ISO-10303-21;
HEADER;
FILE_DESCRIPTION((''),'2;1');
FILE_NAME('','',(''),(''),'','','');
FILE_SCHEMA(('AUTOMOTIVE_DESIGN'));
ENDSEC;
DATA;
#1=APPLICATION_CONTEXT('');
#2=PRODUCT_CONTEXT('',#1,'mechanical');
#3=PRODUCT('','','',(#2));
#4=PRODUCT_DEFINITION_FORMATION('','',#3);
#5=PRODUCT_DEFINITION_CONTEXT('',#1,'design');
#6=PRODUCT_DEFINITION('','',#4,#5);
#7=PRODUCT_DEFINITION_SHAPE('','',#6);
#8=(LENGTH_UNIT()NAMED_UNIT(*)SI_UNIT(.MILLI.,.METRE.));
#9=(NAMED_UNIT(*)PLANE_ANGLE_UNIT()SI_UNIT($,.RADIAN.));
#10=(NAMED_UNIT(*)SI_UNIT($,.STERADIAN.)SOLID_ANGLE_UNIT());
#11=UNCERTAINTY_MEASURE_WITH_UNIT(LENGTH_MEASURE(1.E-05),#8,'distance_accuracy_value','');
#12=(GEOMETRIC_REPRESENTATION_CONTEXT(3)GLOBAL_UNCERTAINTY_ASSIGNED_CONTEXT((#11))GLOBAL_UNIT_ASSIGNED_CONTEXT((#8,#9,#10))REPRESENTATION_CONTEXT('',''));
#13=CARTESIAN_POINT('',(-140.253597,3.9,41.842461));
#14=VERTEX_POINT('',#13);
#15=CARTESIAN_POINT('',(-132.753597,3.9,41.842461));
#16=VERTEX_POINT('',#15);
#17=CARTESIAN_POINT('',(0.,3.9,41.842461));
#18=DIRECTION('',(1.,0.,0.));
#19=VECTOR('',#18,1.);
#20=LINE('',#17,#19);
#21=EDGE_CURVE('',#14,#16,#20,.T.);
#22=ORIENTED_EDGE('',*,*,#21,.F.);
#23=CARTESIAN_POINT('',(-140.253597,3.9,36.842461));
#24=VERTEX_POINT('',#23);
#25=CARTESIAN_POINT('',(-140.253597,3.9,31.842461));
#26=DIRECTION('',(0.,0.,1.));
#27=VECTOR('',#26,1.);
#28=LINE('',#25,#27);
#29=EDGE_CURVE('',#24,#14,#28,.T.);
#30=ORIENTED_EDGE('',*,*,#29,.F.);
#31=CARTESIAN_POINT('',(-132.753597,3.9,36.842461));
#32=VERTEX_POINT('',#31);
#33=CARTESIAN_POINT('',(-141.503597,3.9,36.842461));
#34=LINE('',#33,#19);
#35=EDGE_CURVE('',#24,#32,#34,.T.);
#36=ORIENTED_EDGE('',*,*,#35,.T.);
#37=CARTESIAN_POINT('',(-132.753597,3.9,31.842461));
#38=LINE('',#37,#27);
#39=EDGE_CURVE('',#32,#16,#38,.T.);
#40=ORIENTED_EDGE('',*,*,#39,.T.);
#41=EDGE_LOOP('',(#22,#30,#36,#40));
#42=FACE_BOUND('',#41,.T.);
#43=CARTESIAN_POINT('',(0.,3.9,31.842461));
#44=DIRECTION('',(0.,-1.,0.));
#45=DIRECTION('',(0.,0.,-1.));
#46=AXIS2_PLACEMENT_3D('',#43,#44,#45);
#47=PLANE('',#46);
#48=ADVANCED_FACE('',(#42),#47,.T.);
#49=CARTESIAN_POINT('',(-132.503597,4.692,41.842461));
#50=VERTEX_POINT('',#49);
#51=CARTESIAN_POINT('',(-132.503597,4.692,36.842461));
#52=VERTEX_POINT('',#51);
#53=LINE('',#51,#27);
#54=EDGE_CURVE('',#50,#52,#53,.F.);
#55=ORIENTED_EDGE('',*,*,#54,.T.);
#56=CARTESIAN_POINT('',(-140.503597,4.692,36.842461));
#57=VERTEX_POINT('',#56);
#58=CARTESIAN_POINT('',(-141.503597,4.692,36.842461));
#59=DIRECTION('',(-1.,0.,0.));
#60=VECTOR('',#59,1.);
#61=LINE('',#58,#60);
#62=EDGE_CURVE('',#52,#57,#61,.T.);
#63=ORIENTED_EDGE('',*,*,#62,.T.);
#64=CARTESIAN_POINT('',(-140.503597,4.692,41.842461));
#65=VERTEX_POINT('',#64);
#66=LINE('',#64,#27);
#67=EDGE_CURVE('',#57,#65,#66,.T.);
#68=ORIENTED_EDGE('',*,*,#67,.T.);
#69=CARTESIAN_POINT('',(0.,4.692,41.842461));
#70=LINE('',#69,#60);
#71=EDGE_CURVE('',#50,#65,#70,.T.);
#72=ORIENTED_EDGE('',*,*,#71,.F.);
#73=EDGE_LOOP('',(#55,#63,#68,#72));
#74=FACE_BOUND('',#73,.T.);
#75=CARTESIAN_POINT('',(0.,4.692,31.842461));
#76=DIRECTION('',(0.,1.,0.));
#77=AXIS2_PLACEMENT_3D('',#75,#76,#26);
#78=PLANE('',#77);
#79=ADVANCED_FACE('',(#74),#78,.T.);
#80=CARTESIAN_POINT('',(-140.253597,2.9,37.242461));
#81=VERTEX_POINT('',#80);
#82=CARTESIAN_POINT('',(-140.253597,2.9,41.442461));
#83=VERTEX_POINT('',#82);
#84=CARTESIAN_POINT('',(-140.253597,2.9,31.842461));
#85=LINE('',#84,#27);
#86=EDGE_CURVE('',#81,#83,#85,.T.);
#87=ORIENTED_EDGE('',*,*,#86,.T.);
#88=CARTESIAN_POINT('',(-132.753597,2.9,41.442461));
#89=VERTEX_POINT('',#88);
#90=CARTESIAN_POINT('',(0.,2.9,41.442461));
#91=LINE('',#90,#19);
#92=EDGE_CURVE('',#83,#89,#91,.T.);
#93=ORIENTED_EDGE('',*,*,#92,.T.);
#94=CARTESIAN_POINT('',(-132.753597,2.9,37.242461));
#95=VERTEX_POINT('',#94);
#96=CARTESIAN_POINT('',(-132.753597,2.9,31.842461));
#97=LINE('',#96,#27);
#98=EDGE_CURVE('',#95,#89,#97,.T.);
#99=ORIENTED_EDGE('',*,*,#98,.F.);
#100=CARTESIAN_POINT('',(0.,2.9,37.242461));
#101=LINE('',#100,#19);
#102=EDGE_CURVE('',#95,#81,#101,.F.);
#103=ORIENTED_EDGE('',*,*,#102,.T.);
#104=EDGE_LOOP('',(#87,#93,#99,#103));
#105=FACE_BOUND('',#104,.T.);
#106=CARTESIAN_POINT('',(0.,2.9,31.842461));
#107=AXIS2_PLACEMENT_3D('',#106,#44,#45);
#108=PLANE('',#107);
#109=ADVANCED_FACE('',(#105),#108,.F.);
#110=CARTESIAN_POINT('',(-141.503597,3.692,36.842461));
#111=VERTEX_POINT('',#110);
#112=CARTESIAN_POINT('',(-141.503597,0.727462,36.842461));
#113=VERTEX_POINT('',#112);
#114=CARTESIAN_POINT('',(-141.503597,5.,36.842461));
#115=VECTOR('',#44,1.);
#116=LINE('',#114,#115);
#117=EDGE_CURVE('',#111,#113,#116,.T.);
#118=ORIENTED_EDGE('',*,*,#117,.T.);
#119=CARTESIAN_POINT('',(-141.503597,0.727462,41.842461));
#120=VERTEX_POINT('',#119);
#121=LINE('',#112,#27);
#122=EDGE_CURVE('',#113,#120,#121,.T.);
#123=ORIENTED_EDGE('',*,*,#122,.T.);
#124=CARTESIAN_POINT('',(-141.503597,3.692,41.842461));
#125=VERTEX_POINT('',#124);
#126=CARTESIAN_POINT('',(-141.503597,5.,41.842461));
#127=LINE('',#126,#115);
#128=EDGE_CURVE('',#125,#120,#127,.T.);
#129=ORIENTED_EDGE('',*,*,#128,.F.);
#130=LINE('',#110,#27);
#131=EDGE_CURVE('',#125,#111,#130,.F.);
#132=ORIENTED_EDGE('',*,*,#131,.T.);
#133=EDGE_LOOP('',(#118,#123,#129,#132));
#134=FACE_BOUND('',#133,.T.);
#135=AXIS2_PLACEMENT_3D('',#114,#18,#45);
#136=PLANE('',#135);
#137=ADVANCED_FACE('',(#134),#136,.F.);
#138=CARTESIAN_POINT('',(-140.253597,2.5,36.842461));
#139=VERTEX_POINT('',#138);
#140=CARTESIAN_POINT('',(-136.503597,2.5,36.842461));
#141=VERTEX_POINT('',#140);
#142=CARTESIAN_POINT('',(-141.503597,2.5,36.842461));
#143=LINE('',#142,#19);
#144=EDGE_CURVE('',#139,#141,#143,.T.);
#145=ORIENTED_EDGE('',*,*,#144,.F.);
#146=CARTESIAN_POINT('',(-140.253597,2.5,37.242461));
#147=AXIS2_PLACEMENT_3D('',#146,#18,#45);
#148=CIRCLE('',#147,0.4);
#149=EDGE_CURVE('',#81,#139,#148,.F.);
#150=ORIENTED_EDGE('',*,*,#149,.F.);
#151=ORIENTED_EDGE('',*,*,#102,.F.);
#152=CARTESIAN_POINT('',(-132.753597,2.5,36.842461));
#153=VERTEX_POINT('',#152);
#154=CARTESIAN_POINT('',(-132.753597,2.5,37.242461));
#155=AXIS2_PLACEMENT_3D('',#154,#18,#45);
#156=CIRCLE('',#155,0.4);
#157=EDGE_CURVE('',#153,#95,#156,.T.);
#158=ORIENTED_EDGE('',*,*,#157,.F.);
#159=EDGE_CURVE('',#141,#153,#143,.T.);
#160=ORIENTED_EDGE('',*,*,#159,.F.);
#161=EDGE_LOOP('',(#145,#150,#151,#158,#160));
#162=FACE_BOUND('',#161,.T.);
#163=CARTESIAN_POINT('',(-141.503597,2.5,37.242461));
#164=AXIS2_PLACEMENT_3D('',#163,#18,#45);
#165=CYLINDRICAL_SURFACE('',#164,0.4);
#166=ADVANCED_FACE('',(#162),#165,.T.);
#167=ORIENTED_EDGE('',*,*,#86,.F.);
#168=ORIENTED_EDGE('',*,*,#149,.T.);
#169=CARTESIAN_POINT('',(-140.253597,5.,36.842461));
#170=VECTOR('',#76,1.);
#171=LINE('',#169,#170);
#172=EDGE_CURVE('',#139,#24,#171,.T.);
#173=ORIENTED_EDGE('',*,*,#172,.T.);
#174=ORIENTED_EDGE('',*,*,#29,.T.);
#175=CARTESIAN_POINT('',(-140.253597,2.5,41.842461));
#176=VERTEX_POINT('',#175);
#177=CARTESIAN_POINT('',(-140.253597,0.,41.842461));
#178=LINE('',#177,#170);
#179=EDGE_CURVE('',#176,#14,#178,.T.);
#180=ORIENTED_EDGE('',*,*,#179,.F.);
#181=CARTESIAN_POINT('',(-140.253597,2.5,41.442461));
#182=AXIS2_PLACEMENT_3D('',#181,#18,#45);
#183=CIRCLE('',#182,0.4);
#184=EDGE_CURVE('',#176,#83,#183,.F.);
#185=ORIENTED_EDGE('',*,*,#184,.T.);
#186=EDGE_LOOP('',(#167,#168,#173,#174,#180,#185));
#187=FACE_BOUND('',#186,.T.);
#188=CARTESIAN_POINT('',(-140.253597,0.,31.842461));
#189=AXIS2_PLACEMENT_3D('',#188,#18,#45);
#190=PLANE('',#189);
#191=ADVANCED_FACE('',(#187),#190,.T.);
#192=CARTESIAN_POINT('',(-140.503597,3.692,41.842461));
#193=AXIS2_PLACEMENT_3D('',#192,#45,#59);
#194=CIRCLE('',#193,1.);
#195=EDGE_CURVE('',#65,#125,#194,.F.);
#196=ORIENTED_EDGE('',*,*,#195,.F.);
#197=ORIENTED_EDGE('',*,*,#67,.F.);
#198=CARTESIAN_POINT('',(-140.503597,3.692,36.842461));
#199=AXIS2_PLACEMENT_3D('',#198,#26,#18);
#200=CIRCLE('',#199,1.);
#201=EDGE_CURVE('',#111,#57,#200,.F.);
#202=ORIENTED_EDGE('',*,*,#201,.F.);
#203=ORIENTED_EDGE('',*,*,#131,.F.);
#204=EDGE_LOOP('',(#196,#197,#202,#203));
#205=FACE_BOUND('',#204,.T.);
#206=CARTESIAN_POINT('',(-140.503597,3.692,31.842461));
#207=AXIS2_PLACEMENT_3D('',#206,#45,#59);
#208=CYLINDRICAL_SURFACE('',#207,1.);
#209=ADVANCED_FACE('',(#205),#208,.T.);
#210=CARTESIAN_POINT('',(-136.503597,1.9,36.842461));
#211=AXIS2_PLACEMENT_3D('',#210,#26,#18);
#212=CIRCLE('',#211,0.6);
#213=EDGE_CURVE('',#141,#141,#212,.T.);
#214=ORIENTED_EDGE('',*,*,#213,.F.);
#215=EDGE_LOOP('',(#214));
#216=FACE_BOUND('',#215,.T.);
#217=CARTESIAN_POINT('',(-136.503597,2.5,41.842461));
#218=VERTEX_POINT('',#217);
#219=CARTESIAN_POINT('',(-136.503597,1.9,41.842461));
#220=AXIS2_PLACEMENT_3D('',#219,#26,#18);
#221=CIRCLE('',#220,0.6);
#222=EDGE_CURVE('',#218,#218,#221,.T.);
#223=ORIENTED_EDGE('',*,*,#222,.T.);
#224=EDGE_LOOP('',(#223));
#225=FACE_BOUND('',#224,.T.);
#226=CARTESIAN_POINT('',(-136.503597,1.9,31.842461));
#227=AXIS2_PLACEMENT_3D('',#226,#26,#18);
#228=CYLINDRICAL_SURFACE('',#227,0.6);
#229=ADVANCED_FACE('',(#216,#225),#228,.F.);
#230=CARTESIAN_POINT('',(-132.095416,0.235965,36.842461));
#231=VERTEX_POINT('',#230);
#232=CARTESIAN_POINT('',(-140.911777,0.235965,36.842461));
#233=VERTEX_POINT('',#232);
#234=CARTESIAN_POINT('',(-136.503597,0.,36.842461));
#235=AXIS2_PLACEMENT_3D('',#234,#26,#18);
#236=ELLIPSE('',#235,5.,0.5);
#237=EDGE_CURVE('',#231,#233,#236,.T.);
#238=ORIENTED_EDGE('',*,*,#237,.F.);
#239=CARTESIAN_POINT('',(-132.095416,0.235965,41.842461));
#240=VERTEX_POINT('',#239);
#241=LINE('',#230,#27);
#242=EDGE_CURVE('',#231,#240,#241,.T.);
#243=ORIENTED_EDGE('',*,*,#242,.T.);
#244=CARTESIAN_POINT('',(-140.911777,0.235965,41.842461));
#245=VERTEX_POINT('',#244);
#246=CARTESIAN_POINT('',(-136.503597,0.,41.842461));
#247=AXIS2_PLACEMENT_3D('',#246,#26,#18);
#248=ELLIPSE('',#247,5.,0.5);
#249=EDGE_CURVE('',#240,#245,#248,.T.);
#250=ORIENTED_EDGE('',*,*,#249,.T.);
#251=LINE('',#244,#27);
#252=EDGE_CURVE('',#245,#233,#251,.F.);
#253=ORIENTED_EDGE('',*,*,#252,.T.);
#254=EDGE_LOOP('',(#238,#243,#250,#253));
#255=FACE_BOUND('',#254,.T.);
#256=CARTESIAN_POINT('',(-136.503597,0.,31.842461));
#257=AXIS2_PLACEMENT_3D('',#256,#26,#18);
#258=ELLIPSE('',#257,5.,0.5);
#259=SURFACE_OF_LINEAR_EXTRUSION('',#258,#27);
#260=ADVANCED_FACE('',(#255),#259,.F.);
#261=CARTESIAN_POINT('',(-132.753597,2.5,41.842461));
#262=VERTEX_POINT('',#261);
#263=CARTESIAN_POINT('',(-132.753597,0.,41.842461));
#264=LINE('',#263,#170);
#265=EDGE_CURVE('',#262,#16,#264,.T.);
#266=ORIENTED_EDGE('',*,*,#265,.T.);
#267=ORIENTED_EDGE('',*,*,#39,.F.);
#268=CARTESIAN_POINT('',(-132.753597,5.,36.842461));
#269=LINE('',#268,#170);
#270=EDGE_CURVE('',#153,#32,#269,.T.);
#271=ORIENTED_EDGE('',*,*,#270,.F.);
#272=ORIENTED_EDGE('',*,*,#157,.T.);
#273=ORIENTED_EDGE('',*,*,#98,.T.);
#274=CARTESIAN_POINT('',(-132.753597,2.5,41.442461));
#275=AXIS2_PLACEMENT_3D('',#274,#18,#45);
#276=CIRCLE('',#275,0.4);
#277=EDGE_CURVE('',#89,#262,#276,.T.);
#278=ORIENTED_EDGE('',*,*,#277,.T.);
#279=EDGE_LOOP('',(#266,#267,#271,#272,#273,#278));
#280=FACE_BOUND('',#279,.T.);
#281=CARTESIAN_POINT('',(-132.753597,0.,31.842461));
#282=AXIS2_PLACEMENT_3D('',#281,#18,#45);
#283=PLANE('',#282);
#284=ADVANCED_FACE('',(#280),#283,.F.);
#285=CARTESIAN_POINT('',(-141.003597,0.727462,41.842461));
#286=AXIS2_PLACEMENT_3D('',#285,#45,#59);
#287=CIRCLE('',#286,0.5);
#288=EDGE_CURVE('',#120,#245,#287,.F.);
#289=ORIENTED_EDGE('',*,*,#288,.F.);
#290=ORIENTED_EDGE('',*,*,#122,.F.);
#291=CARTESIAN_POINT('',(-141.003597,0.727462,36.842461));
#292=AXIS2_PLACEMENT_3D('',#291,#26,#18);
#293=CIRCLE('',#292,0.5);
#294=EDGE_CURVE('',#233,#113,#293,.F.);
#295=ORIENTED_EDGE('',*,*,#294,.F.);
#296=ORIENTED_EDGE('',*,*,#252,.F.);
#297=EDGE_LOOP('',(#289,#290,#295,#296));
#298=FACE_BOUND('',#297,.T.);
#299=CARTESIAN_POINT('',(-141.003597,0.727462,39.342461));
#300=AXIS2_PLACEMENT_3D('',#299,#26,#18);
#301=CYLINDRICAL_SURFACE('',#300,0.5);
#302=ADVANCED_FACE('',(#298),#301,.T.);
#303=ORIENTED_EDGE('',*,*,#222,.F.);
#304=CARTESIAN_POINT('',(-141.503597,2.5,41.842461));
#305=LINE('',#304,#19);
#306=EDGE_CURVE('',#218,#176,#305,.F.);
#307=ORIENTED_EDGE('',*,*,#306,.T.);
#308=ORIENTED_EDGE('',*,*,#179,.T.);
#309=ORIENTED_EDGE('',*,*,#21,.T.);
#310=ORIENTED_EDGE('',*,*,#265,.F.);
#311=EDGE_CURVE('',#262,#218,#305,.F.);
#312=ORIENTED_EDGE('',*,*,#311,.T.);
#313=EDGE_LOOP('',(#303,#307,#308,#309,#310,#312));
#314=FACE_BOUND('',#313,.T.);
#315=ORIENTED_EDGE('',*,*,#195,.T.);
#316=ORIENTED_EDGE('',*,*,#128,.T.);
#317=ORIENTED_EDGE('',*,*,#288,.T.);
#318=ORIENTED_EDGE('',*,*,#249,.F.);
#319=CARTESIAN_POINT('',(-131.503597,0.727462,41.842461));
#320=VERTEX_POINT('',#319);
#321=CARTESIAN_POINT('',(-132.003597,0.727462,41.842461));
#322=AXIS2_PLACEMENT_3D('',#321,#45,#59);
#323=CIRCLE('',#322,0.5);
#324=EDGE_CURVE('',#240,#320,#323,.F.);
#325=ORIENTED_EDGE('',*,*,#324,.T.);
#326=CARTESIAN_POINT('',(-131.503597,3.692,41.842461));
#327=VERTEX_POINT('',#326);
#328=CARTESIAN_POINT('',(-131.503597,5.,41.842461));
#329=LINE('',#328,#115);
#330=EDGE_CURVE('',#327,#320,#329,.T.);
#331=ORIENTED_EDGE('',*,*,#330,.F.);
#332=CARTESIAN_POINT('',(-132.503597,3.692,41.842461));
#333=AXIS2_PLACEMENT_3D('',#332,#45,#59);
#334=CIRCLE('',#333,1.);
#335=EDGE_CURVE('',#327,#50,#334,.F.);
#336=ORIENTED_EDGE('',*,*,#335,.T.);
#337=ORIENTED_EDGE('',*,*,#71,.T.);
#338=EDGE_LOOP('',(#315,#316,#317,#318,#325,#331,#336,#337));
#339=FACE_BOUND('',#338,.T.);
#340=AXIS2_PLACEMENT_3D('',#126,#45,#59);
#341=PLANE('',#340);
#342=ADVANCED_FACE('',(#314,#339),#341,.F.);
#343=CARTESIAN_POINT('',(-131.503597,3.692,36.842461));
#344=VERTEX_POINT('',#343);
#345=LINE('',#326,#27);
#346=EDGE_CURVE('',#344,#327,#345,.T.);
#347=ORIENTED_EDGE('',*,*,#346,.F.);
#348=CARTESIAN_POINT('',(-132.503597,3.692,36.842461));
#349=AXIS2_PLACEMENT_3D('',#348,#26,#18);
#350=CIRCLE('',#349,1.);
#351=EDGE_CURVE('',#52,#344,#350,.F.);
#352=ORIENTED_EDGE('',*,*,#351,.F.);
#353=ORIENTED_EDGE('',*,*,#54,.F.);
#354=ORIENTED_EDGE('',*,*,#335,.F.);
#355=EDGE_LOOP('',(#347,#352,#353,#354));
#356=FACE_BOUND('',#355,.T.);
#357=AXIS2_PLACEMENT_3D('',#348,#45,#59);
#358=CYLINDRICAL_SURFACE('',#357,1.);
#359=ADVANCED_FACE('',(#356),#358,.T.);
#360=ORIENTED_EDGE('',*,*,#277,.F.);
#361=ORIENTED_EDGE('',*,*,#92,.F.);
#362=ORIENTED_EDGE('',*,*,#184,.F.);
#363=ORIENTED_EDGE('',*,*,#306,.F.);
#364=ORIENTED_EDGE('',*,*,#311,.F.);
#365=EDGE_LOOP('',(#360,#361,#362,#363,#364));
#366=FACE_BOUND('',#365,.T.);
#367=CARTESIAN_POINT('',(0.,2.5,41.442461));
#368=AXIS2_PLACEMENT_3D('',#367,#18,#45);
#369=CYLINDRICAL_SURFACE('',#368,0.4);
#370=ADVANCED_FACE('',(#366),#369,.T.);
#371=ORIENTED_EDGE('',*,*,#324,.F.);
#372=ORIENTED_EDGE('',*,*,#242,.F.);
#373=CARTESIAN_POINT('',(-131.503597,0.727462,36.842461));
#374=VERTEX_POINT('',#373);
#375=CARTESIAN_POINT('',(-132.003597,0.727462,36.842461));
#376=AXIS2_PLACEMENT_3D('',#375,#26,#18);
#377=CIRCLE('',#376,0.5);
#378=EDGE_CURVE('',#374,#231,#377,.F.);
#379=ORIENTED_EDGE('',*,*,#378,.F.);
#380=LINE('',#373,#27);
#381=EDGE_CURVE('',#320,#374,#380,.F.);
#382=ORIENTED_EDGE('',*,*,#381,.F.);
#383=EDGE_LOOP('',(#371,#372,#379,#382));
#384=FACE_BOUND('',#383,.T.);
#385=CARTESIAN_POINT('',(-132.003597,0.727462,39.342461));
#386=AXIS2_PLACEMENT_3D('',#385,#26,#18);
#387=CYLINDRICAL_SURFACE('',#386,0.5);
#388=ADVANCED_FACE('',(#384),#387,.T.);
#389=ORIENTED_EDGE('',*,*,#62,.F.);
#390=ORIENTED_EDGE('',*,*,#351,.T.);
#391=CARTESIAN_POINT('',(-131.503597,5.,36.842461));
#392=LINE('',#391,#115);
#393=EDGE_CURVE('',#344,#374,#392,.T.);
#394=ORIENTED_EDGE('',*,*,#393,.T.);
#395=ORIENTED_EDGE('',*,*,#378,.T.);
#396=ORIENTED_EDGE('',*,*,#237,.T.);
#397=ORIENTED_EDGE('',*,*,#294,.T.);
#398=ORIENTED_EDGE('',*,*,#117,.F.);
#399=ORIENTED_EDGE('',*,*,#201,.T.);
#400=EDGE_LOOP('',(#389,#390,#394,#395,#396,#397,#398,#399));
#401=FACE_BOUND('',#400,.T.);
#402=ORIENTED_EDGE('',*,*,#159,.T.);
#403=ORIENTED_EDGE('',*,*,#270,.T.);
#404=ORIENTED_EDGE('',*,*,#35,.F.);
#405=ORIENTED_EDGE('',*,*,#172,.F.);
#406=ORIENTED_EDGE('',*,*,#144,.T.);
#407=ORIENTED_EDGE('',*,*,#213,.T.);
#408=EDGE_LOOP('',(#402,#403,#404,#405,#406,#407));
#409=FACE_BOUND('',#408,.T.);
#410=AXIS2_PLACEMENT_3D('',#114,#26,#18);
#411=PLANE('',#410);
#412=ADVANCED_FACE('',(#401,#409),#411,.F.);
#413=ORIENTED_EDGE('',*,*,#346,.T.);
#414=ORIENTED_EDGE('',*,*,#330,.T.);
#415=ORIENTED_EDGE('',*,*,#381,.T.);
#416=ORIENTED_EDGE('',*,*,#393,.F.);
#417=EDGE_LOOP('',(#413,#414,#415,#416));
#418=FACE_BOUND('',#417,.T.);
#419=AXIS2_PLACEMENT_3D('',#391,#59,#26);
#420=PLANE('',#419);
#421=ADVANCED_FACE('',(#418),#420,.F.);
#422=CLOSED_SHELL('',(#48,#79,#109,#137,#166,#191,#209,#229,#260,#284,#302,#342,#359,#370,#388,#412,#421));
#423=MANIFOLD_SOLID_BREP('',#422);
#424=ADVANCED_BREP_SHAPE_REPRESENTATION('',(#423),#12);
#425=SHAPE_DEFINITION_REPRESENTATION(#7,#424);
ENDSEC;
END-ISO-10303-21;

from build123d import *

# Parameters (mm, degrees)
SKETCH1_W           = 10
SKETCH1_H           = 5
BOSS_EXTRUDE1_DEPTH = 5
SKETCH2_W           = 10
SKETCH2_H           = 0.30799953
SKETCH2_W_2         = 7.5
SKETCH2_H_2         = 1
SKETCH2_R           = 0.6
CUT_EXTRUDE1_DEPTH  = 10
FILLET1_START       = 36
FILLET1_DEPTH       = 7
FILLET2_R           = 1
FILLET3_R           = 0.4


with BuildPart() as part:
    # Sketch1 → Boss-Extrude1 (new body)
    with BuildSketch(Plane(origin=(0, 0, 0), x_dir=(1, 0, 0), z_dir=(0, 1, 0))):
        with Locations((-136.503596575, -39.342461353)):
            Rectangle(SKETCH1_W, SKETCH1_H)
    extrude(amount=BOSS_EXTRUDE1_DEPTH)

    # Sketch2 → Cut-Extrude1 (cut)
    with BuildSketch(Plane.XY.offset(41.842461353)):
        with Locations((-136.503596575, 4.846000235)):
            Rectangle(SKETCH2_W, SKETCH2_H)
        with Locations((-136.503596575, 3.4)):
            Rectangle(SKETCH2_W_2, SKETCH2_H_2)
        with Locations((-136.503596575, 1.9)):
            Circle(SKETCH2_R)
        with BuildLine():
            add(Edge.make_bspline(
                [(-131.503596575, 0), (-131.503596575, 0.5), (-136.503596575, 0.5)],
                knots=[0, 0, 0, 1.570796327, 1.570796327, 1.570796327], degree=2, weights=[1, 0.707106781, 1]))
            add(Edge.make_bspline(
                [(-136.503596575, 0.5), (-148.574664386, 0.5), (-140.03913048, -0.353553391), (-131.503596575, -1.207106781), (-131.503596575, 0)],
                knots=[1.570796327, 1.570796327, 1.570796327, 3.926990817, 3.926990817, 6.283185307, 6.283185307, 6.283185307], degree=2, weights=[1, 0.382683432, 1, 0.382683432, 1]))
        make_face()
    extrude(amount=-CUT_EXTRUDE1_DEPTH, mode=Mode.SUBTRACT)

    # Fillet1: read off the stored shape, not the designer's step
    # Fillet1 outline → Fillet1 (cut)
    with BuildSketch(Plane.XY.offset(FILLET1_START)):
        with BuildLine():
            ThreePointArc((-131.503596575, 0.727461803), (-131.684151383, 0.342812912), (-132.095415653, 0.235964848))
            add(Edge.make_bspline(
                [(-131.503596575, 0), (-131.503596575, 0.125404077), (-132.095415653, 0.235964848)],
                knots=[0, 0, 0, 0.504721097, 0.504721097, 0.504721097], degree=2, weights=[1, 0.905888889, 0.872256483]))
            Line((-131.503596575, 0), (-131.503596575, 0.727461803))
        make_face()
        with BuildLine():
            ThreePointArc((-140.911777496, 0.235964848), (-141.323041766, 0.342812912), (-141.503596575, 0.727461803))
            Line((-141.503596575, 0.727461803), (-141.503596575, 0))
            add(Edge.make_bspline(
                [(-140.911777496, 0.235964848), (-141.503596575, 0.125404077), (-141.503596575, 0)],
                knots=[2.636871556, 2.636871556, 2.636871556, 3.141592654, 3.141592654, 3.141592654], degree=2, weights=[0.872256483, 0.905888889, 1]))
        make_face()
    extrude(amount=FILLET1_DEPTH, mode=Mode.SUBTRACT)

    # Fillet2
    fillet2_edges = [part.edges().sort_by_distance(p)[0] for p in [
        (-131.503596575, 4.69200047, 39.342461353),
        (-141.503596575, 4.69200047, 39.342461353),
    ]]
    fillet(fillet2_edges, radius=FILLET2_R)

    # Fillet3
    fillet3_edges = [part.edges().sort_by_distance(p)[0] for p in [
        (-136.503596575, 2.9, 36.842461353),
        (-136.503596575, 2.9, 41.842461353),
    ]]
    fillet(fillet3_edges, radius=FILLET3_R - 0.0001)  # a hair under: the kernel refuses the full size


solid = part.part
